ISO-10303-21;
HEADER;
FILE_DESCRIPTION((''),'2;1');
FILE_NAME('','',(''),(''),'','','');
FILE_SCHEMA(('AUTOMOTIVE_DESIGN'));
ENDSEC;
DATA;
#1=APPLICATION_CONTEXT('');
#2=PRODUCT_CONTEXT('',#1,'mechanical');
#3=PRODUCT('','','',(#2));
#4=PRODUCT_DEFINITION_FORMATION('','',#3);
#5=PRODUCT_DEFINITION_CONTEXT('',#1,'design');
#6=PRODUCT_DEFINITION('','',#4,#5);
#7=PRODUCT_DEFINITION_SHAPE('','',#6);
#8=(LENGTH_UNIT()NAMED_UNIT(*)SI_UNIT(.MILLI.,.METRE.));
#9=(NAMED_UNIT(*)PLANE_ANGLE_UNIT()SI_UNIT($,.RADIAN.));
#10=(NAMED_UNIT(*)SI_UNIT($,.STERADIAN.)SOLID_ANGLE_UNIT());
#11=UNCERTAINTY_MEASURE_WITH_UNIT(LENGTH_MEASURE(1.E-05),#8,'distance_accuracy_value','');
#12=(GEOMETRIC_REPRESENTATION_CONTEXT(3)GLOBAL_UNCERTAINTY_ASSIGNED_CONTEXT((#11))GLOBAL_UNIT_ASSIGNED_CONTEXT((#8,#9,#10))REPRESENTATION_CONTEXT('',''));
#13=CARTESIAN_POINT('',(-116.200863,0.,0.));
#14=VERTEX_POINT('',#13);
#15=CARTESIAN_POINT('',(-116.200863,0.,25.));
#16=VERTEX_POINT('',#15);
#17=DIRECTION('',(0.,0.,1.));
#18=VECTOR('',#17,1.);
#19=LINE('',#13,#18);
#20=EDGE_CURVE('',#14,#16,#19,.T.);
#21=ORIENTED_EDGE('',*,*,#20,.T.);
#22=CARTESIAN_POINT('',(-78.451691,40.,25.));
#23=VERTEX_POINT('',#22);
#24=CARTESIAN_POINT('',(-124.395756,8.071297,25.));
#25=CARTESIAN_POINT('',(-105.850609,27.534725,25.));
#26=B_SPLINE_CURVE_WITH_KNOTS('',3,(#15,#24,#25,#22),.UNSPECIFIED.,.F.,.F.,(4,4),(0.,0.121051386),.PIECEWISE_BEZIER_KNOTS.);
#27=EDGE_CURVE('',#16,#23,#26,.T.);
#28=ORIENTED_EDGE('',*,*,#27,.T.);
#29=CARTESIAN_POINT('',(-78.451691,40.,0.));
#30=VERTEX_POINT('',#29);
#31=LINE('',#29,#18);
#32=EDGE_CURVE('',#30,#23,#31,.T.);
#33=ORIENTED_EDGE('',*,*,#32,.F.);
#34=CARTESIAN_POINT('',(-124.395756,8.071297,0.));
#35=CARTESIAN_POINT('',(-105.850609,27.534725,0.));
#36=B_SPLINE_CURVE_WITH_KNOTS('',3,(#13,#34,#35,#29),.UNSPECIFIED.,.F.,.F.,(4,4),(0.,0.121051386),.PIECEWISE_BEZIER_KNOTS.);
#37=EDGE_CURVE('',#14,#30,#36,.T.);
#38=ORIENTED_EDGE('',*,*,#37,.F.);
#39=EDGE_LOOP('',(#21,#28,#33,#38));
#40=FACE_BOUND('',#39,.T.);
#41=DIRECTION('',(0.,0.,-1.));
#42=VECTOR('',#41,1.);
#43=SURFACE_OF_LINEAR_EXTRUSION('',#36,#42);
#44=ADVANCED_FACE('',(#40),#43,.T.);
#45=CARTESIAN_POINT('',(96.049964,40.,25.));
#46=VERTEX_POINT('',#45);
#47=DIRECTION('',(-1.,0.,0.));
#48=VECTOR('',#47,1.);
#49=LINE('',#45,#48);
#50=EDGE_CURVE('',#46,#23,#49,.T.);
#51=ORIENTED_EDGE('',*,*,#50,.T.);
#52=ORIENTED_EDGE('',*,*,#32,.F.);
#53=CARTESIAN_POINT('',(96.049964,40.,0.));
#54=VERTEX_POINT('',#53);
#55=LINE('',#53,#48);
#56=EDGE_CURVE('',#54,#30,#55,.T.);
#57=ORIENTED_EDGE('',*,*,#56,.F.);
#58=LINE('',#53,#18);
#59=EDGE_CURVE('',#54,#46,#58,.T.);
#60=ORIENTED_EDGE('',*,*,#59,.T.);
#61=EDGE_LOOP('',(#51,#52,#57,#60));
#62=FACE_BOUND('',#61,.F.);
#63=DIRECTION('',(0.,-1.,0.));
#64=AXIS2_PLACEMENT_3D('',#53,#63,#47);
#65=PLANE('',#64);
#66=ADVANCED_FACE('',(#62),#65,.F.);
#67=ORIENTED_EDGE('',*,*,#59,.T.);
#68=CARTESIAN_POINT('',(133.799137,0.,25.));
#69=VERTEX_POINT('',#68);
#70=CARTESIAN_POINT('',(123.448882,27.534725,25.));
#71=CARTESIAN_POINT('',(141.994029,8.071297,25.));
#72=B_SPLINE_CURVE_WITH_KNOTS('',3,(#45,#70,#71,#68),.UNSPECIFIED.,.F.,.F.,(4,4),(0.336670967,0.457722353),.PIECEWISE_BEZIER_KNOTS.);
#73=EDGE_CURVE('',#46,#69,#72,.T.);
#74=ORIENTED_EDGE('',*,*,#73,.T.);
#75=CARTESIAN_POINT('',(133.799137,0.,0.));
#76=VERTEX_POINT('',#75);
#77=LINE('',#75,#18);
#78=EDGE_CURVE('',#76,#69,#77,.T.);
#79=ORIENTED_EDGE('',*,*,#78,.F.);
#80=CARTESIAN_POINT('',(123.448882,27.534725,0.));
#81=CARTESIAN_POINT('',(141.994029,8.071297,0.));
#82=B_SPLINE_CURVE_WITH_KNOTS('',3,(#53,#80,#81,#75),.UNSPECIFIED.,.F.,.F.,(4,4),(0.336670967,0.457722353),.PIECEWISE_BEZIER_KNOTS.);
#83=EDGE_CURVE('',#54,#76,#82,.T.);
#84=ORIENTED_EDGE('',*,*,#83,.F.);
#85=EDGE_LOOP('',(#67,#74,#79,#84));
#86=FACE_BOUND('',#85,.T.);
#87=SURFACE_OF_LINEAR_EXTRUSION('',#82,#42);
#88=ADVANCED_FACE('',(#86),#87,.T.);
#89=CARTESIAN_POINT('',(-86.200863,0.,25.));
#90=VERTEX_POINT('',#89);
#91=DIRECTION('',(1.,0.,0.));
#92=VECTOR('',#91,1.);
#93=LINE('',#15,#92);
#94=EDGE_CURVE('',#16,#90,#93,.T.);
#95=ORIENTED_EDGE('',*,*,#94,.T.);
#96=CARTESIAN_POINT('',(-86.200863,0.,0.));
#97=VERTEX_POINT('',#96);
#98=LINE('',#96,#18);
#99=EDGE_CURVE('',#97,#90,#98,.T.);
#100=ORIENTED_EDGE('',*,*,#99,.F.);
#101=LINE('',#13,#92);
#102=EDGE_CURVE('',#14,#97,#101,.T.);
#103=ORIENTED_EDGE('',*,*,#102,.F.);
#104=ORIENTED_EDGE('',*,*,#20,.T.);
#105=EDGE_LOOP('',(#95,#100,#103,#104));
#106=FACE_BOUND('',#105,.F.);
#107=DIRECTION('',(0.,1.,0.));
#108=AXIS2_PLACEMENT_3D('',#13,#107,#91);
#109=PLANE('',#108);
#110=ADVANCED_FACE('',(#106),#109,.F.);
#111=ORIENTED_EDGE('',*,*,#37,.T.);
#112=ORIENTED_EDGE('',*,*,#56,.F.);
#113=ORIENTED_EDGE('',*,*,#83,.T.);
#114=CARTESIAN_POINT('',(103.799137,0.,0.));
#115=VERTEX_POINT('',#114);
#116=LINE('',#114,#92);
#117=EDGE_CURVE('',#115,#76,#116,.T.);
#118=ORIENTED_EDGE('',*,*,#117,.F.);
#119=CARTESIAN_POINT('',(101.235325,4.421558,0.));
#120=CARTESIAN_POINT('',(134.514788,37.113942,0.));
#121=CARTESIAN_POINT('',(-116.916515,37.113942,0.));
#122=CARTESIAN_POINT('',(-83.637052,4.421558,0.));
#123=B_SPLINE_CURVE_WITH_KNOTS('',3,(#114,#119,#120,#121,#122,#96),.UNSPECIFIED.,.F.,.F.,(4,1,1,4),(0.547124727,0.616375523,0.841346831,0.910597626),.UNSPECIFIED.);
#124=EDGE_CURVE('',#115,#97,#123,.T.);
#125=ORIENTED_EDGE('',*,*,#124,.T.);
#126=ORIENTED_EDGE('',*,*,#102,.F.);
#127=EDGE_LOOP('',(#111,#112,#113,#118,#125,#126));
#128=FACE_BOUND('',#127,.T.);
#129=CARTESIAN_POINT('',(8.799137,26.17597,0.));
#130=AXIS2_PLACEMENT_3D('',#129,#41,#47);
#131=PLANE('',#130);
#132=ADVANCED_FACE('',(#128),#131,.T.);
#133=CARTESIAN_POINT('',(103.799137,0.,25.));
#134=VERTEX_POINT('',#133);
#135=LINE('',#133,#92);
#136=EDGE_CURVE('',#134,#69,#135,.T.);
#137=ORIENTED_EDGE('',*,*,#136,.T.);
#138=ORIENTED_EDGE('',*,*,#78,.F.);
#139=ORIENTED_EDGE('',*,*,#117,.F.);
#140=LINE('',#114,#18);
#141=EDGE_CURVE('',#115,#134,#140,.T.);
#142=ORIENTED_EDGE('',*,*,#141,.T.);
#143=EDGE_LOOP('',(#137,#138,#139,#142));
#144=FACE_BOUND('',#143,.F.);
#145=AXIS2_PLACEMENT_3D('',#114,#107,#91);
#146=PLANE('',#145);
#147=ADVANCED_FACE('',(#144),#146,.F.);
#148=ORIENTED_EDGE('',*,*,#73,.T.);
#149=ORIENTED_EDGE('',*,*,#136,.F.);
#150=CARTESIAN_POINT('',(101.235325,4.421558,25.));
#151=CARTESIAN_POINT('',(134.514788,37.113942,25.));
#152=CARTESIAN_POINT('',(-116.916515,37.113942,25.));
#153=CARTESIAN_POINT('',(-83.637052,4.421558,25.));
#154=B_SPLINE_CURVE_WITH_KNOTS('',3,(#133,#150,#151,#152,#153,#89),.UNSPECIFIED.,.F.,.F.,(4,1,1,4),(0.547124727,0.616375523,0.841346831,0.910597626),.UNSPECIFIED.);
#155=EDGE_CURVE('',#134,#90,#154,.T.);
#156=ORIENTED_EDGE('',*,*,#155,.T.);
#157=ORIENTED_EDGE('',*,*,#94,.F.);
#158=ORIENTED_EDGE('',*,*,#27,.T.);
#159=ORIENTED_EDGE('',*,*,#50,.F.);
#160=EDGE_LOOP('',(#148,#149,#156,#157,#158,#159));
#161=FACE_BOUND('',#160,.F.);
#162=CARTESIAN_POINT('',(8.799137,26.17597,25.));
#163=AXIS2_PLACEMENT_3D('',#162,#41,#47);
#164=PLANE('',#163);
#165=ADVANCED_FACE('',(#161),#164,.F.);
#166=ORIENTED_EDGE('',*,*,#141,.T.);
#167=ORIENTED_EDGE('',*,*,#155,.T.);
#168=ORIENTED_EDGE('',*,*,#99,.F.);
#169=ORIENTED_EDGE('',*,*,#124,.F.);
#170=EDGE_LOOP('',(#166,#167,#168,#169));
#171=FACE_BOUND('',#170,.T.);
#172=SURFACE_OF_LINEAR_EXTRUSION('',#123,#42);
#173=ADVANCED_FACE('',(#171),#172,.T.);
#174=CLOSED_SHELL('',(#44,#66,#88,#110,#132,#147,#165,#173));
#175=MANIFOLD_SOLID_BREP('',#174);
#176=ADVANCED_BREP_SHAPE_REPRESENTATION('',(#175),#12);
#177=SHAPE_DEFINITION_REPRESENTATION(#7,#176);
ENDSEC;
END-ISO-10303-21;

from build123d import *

# Parameters (mm, degrees)
F1_DEPTH = 25


with BuildPart() as f1:
    # F0 (on Top) → F1 (new body)
    with BuildSketch(Plane.XY):
        with BuildLine():
            add(Edge.make_bspline(
                [(-116.2008633957, 0), (-124.3957559353, 8.071296767), (-105.8506085877, 27.534724907), (-78.4516912193, 40)],
                knots=[0, 0, 0, 0, 0.1210513861, 0.1210513861, 0.1210513861, 0.1210513861], degree=3))
            Line((-116.2008633957, 0), (-86.2008633957, 0))
            add(Edge.make_bspline(
                [(103.7991366043, 0), (101.235325492, 4.4215579911), (134.5147878784, 37.1139422067), (-116.9165146698, 37.1139422067), (-83.6370522834, 4.4215579911), (-86.2008633957, 0)],
                knots=[0.5471247269, 0.5471247269, 0.5471247269, 0.5471247269, 0.6163755226, 0.8413468307, 0.9105976264, 0.9105976264, 0.9105976264, 0.9105976264], degree=3))
            Line((103.7991366043, 0), (133.7991366043, 0))
            add(Edge.make_bspline(
                [(96.0499644279, 40), (123.4488817963, 27.534724907), (141.9940291439, 8.071296767), (133.7991366043, 0)],
                knots=[0.3366709672, 0.3366709672, 0.3366709672, 0.3366709672, 0.4577223533, 0.4577223533, 0.4577223533, 0.4577223533], degree=3))
            Line((96.0499644279, 40), (-78.4516912193, 40))
        make_face()
    extrude(amount=F1_DEPTH)


solid = f1.part
